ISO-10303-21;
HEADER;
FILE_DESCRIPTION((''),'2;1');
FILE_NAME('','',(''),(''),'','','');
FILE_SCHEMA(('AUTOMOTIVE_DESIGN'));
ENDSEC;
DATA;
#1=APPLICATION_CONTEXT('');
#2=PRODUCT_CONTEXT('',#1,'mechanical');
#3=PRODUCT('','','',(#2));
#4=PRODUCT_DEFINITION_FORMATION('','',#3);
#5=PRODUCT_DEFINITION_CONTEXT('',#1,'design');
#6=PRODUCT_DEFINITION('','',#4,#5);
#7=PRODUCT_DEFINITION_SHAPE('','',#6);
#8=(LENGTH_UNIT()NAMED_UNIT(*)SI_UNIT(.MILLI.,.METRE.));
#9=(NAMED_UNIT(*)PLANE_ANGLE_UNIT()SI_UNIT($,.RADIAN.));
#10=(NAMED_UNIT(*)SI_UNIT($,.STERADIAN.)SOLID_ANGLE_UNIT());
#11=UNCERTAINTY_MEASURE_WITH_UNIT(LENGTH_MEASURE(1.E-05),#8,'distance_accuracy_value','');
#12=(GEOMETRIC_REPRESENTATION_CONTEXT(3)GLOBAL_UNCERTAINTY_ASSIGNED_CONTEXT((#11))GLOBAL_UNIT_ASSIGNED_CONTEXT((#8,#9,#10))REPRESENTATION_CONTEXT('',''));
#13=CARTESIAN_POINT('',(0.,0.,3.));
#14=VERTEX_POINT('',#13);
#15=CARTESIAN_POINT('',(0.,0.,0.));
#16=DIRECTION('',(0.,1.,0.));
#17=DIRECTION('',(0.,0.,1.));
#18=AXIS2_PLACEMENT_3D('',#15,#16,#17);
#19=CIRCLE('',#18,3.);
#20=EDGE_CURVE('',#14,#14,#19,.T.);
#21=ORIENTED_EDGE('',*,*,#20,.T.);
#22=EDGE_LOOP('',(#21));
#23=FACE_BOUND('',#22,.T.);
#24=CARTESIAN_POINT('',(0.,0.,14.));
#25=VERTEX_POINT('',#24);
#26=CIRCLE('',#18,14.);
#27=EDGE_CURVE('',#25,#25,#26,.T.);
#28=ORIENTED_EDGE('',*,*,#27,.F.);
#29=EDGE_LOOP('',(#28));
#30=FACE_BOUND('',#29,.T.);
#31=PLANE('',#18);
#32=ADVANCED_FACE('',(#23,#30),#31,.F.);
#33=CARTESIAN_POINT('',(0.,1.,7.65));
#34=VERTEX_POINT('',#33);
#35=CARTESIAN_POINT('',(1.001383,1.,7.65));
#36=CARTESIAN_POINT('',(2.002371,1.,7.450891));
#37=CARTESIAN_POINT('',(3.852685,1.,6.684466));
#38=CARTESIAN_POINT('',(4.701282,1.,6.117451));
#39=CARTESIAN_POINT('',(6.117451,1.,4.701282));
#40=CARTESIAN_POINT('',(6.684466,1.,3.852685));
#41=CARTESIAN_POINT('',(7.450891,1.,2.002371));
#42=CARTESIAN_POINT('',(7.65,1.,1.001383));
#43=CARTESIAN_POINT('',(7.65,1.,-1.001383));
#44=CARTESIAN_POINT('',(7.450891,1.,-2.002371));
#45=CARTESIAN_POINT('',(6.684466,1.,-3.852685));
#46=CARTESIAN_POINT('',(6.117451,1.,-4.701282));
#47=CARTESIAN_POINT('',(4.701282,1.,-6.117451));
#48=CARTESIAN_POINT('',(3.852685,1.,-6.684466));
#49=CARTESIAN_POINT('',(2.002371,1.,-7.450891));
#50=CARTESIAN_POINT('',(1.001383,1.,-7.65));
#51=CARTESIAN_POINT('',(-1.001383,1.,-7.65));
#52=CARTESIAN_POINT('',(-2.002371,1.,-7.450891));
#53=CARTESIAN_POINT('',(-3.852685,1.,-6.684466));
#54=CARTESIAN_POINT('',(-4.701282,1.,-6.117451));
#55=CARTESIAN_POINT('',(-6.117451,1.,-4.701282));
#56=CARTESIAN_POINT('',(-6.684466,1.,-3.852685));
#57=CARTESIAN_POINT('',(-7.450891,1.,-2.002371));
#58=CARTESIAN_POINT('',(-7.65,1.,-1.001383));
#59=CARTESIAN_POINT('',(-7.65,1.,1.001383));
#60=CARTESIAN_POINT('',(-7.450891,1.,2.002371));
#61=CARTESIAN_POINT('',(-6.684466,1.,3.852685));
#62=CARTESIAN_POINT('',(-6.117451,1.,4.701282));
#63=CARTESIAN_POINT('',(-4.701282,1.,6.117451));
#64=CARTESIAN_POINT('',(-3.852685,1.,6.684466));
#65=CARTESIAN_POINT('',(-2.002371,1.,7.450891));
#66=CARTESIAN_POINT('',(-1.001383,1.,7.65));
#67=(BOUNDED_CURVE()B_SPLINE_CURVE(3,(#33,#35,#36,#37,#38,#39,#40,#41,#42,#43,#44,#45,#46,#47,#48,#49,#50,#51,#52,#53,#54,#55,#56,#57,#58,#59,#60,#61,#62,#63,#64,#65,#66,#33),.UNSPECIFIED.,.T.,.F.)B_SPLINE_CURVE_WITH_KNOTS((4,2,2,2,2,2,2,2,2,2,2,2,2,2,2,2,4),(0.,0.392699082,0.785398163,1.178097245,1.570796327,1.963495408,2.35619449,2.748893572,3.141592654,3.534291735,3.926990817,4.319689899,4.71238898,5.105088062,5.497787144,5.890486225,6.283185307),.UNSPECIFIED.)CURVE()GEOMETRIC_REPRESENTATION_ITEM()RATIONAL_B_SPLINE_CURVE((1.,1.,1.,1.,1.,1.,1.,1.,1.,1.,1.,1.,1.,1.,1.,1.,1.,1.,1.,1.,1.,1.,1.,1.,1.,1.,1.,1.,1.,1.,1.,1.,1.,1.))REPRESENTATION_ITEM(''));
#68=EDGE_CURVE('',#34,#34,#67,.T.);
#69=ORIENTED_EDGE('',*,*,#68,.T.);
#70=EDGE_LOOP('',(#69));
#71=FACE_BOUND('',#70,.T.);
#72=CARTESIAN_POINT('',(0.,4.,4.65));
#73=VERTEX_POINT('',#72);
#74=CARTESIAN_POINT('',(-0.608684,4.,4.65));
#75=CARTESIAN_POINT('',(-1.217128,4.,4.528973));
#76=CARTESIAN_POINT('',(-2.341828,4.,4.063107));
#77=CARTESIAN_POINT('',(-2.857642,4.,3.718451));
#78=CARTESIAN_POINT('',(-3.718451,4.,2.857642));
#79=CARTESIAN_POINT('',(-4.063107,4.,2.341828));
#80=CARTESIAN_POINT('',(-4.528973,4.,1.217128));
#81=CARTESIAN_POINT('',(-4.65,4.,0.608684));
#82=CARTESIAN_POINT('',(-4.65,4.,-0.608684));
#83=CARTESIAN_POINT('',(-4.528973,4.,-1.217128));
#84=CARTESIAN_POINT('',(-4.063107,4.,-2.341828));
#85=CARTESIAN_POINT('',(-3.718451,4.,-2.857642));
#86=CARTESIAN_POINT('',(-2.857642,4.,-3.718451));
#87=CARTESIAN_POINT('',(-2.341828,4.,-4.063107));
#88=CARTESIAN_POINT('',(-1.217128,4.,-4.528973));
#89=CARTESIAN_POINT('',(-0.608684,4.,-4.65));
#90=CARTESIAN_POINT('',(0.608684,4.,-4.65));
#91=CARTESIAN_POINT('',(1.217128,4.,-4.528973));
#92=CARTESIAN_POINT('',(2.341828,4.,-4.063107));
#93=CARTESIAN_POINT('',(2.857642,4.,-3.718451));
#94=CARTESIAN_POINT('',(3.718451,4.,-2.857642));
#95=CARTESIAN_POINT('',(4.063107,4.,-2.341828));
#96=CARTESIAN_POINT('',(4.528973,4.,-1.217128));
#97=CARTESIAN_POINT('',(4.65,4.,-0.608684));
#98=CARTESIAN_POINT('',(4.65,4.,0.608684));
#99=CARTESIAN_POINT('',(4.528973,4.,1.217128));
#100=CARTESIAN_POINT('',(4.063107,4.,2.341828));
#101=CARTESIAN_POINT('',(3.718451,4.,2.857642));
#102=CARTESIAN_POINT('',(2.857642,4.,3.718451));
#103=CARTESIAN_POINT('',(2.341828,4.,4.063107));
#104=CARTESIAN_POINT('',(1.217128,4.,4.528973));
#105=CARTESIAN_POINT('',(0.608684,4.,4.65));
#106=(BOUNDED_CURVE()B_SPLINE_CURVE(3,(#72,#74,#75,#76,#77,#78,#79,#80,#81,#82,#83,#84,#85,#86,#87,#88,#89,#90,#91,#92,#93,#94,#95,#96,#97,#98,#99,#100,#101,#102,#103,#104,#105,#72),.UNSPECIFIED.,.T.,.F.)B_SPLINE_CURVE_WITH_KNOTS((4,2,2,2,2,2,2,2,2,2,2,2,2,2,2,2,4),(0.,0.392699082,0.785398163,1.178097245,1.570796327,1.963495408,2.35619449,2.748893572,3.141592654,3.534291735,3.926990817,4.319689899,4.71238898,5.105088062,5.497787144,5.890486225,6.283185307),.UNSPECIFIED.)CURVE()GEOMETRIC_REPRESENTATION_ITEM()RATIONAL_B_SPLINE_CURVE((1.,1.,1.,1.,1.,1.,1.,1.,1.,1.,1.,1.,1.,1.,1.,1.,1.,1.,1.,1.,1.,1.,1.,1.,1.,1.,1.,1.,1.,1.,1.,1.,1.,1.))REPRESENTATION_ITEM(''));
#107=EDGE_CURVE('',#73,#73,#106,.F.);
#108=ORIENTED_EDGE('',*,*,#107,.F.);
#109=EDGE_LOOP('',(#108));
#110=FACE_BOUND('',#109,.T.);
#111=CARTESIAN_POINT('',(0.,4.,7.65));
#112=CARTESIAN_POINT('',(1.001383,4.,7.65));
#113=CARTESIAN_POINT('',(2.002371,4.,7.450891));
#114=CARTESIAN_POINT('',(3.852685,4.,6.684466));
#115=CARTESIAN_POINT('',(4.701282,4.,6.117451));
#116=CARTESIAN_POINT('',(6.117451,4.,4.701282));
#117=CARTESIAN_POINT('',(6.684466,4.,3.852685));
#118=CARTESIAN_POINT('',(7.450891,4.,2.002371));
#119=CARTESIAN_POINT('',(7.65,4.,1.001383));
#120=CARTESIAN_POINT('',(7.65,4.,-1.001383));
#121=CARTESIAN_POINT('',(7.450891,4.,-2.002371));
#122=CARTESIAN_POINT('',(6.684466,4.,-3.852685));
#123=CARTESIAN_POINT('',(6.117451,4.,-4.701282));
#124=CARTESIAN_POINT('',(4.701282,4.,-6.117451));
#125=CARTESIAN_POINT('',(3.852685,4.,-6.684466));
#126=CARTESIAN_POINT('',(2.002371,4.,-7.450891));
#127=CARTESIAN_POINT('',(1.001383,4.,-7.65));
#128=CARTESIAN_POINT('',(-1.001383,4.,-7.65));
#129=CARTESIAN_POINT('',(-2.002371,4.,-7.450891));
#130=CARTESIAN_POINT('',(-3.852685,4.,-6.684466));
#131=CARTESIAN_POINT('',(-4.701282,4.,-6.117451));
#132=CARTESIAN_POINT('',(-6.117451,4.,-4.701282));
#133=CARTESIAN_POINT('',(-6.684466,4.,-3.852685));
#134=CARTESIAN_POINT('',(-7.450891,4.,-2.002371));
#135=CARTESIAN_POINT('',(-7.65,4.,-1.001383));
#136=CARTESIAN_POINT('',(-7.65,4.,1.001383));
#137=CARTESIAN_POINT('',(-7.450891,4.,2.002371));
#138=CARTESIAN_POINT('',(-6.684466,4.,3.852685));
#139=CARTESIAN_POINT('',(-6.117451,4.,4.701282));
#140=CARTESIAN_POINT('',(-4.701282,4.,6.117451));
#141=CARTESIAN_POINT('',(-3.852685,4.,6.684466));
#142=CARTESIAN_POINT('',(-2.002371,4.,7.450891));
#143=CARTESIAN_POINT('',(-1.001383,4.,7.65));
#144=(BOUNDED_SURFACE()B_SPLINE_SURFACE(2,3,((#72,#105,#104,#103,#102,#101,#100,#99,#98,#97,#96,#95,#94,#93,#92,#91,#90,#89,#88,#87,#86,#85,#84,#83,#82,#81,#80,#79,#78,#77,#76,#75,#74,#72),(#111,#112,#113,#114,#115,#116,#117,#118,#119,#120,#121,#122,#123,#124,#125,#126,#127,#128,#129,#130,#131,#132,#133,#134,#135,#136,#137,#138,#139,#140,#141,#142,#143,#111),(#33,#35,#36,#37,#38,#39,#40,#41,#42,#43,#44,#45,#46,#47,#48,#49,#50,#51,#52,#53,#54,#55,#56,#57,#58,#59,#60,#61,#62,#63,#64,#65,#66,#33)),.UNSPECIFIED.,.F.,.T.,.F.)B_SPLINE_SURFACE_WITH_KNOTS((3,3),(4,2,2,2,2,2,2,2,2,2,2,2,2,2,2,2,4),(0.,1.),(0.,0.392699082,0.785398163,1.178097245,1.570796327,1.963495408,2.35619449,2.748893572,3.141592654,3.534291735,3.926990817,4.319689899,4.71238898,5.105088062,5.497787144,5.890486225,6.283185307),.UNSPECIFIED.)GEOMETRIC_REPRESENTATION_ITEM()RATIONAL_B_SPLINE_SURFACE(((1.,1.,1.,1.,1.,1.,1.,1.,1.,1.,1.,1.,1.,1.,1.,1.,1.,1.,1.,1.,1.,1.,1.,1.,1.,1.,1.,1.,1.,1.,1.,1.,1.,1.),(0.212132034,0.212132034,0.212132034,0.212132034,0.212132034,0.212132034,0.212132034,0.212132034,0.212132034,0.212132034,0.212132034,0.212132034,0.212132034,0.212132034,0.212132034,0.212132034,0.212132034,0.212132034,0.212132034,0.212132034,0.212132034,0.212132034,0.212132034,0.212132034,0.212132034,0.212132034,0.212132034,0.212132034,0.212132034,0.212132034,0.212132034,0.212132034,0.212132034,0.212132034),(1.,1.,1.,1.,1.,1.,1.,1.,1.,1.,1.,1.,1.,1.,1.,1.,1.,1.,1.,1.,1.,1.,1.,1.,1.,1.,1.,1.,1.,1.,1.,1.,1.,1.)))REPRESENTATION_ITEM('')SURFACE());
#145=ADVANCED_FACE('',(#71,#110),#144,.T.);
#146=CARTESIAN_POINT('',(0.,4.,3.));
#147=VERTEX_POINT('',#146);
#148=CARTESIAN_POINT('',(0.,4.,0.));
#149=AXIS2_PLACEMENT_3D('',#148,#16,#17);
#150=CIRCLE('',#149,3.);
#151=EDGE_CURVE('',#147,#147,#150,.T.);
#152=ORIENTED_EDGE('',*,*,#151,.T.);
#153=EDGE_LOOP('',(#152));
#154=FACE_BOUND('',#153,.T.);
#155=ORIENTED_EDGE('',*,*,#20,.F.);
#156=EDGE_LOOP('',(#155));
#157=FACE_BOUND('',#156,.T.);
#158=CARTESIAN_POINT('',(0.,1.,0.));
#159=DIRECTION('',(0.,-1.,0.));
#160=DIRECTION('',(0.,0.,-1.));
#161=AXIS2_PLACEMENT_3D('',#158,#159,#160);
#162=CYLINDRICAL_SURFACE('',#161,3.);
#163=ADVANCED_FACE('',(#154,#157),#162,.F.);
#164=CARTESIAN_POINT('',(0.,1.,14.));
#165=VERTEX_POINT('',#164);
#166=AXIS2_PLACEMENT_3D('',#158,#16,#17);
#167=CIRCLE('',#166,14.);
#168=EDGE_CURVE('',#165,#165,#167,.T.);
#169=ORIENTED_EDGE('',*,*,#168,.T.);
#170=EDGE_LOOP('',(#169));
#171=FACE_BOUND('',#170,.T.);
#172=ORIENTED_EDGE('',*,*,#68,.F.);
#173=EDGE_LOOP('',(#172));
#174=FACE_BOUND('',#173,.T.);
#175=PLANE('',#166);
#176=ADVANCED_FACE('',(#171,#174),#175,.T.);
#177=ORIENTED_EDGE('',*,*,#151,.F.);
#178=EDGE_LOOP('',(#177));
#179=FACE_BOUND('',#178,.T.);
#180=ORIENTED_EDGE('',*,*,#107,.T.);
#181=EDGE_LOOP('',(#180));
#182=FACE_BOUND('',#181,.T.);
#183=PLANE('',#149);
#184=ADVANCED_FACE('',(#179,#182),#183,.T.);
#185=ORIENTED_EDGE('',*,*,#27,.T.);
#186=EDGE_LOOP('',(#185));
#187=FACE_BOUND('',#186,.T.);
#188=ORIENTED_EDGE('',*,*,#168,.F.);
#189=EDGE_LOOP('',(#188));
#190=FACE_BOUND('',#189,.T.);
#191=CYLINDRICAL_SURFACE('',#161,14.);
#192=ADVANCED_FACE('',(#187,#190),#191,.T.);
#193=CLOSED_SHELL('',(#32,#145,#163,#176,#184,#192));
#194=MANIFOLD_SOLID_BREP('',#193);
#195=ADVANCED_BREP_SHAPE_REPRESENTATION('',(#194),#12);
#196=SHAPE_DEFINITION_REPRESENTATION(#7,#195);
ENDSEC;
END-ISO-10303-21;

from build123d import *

# Parameters (mm, degrees)
ESQUISSE1_R        = 14
ESQUISSE1_R_2      = 3
BOSS_EXTRU_1_DEPTH = 1
ESQUISSE2_R        = 7.65
ESQUISSE2_R_2      = 3
BOSS_EXTRU_2_DEPTH = 3
CONG_1_SIZE        = 3


with BuildPart() as part:
    # Esquisse1 → Boss.-Extru.1 (new body)
    with BuildSketch(Plane(origin=(0, 0, 0), x_dir=(1, 0, 0), z_dir=(0, 1, 0))):
        with Locations(Location((0, 0, 0), (0, 0, 270))):
            Circle(ESQUISSE1_R)
        with Locations(Location((0, 0, 0), (0, 0, 270))):
            Circle(ESQUISSE1_R_2, mode=Mode.SUBTRACT)
    extrude(amount=BOSS_EXTRU_1_DEPTH)

    # Esquisse2 → Boss.-Extru.2 (add)
    with BuildSketch(Plane(origin=(0, 1, 0), x_dir=(1, 0, 0), z_dir=(0, 1, 0))):
        with Locations(Location((0, 0, 0), (0, 0, 270))):
            Circle(ESQUISSE2_R)
        with Locations(Location((0, 0, 0), (0, 0, 270))):
            Circle(ESQUISSE2_R_2, mode=Mode.SUBTRACT)
    extrude(amount=BOSS_EXTRU_2_DEPTH)

    # Congé1
    # a fillet whose section is not a circle: 3 mm, written as the material it takes off along each edge
    with BuildSketch(Plane(origin=(0, 4, 0), x_dir=(0, 0, 1), z_dir=(-1, 0, 0))) as cong_1_piece_1:
        with BuildLine():
            Bezier((7.65, -CONG_1_SIZE), (7.65, 0), (7.65 - CONG_1_SIZE, 0), weights=[1, 0.212132034, 1])
            Line((7.65 - CONG_1_SIZE, 0), (7.65, 0))
            Line((7.65, 0), (7.65, -CONG_1_SIZE))
        make_face()
    revolve(axis=Axis((0, 4, 0), (0, 1, 0)), mode=Mode.SUBTRACT)


solid = part.part
